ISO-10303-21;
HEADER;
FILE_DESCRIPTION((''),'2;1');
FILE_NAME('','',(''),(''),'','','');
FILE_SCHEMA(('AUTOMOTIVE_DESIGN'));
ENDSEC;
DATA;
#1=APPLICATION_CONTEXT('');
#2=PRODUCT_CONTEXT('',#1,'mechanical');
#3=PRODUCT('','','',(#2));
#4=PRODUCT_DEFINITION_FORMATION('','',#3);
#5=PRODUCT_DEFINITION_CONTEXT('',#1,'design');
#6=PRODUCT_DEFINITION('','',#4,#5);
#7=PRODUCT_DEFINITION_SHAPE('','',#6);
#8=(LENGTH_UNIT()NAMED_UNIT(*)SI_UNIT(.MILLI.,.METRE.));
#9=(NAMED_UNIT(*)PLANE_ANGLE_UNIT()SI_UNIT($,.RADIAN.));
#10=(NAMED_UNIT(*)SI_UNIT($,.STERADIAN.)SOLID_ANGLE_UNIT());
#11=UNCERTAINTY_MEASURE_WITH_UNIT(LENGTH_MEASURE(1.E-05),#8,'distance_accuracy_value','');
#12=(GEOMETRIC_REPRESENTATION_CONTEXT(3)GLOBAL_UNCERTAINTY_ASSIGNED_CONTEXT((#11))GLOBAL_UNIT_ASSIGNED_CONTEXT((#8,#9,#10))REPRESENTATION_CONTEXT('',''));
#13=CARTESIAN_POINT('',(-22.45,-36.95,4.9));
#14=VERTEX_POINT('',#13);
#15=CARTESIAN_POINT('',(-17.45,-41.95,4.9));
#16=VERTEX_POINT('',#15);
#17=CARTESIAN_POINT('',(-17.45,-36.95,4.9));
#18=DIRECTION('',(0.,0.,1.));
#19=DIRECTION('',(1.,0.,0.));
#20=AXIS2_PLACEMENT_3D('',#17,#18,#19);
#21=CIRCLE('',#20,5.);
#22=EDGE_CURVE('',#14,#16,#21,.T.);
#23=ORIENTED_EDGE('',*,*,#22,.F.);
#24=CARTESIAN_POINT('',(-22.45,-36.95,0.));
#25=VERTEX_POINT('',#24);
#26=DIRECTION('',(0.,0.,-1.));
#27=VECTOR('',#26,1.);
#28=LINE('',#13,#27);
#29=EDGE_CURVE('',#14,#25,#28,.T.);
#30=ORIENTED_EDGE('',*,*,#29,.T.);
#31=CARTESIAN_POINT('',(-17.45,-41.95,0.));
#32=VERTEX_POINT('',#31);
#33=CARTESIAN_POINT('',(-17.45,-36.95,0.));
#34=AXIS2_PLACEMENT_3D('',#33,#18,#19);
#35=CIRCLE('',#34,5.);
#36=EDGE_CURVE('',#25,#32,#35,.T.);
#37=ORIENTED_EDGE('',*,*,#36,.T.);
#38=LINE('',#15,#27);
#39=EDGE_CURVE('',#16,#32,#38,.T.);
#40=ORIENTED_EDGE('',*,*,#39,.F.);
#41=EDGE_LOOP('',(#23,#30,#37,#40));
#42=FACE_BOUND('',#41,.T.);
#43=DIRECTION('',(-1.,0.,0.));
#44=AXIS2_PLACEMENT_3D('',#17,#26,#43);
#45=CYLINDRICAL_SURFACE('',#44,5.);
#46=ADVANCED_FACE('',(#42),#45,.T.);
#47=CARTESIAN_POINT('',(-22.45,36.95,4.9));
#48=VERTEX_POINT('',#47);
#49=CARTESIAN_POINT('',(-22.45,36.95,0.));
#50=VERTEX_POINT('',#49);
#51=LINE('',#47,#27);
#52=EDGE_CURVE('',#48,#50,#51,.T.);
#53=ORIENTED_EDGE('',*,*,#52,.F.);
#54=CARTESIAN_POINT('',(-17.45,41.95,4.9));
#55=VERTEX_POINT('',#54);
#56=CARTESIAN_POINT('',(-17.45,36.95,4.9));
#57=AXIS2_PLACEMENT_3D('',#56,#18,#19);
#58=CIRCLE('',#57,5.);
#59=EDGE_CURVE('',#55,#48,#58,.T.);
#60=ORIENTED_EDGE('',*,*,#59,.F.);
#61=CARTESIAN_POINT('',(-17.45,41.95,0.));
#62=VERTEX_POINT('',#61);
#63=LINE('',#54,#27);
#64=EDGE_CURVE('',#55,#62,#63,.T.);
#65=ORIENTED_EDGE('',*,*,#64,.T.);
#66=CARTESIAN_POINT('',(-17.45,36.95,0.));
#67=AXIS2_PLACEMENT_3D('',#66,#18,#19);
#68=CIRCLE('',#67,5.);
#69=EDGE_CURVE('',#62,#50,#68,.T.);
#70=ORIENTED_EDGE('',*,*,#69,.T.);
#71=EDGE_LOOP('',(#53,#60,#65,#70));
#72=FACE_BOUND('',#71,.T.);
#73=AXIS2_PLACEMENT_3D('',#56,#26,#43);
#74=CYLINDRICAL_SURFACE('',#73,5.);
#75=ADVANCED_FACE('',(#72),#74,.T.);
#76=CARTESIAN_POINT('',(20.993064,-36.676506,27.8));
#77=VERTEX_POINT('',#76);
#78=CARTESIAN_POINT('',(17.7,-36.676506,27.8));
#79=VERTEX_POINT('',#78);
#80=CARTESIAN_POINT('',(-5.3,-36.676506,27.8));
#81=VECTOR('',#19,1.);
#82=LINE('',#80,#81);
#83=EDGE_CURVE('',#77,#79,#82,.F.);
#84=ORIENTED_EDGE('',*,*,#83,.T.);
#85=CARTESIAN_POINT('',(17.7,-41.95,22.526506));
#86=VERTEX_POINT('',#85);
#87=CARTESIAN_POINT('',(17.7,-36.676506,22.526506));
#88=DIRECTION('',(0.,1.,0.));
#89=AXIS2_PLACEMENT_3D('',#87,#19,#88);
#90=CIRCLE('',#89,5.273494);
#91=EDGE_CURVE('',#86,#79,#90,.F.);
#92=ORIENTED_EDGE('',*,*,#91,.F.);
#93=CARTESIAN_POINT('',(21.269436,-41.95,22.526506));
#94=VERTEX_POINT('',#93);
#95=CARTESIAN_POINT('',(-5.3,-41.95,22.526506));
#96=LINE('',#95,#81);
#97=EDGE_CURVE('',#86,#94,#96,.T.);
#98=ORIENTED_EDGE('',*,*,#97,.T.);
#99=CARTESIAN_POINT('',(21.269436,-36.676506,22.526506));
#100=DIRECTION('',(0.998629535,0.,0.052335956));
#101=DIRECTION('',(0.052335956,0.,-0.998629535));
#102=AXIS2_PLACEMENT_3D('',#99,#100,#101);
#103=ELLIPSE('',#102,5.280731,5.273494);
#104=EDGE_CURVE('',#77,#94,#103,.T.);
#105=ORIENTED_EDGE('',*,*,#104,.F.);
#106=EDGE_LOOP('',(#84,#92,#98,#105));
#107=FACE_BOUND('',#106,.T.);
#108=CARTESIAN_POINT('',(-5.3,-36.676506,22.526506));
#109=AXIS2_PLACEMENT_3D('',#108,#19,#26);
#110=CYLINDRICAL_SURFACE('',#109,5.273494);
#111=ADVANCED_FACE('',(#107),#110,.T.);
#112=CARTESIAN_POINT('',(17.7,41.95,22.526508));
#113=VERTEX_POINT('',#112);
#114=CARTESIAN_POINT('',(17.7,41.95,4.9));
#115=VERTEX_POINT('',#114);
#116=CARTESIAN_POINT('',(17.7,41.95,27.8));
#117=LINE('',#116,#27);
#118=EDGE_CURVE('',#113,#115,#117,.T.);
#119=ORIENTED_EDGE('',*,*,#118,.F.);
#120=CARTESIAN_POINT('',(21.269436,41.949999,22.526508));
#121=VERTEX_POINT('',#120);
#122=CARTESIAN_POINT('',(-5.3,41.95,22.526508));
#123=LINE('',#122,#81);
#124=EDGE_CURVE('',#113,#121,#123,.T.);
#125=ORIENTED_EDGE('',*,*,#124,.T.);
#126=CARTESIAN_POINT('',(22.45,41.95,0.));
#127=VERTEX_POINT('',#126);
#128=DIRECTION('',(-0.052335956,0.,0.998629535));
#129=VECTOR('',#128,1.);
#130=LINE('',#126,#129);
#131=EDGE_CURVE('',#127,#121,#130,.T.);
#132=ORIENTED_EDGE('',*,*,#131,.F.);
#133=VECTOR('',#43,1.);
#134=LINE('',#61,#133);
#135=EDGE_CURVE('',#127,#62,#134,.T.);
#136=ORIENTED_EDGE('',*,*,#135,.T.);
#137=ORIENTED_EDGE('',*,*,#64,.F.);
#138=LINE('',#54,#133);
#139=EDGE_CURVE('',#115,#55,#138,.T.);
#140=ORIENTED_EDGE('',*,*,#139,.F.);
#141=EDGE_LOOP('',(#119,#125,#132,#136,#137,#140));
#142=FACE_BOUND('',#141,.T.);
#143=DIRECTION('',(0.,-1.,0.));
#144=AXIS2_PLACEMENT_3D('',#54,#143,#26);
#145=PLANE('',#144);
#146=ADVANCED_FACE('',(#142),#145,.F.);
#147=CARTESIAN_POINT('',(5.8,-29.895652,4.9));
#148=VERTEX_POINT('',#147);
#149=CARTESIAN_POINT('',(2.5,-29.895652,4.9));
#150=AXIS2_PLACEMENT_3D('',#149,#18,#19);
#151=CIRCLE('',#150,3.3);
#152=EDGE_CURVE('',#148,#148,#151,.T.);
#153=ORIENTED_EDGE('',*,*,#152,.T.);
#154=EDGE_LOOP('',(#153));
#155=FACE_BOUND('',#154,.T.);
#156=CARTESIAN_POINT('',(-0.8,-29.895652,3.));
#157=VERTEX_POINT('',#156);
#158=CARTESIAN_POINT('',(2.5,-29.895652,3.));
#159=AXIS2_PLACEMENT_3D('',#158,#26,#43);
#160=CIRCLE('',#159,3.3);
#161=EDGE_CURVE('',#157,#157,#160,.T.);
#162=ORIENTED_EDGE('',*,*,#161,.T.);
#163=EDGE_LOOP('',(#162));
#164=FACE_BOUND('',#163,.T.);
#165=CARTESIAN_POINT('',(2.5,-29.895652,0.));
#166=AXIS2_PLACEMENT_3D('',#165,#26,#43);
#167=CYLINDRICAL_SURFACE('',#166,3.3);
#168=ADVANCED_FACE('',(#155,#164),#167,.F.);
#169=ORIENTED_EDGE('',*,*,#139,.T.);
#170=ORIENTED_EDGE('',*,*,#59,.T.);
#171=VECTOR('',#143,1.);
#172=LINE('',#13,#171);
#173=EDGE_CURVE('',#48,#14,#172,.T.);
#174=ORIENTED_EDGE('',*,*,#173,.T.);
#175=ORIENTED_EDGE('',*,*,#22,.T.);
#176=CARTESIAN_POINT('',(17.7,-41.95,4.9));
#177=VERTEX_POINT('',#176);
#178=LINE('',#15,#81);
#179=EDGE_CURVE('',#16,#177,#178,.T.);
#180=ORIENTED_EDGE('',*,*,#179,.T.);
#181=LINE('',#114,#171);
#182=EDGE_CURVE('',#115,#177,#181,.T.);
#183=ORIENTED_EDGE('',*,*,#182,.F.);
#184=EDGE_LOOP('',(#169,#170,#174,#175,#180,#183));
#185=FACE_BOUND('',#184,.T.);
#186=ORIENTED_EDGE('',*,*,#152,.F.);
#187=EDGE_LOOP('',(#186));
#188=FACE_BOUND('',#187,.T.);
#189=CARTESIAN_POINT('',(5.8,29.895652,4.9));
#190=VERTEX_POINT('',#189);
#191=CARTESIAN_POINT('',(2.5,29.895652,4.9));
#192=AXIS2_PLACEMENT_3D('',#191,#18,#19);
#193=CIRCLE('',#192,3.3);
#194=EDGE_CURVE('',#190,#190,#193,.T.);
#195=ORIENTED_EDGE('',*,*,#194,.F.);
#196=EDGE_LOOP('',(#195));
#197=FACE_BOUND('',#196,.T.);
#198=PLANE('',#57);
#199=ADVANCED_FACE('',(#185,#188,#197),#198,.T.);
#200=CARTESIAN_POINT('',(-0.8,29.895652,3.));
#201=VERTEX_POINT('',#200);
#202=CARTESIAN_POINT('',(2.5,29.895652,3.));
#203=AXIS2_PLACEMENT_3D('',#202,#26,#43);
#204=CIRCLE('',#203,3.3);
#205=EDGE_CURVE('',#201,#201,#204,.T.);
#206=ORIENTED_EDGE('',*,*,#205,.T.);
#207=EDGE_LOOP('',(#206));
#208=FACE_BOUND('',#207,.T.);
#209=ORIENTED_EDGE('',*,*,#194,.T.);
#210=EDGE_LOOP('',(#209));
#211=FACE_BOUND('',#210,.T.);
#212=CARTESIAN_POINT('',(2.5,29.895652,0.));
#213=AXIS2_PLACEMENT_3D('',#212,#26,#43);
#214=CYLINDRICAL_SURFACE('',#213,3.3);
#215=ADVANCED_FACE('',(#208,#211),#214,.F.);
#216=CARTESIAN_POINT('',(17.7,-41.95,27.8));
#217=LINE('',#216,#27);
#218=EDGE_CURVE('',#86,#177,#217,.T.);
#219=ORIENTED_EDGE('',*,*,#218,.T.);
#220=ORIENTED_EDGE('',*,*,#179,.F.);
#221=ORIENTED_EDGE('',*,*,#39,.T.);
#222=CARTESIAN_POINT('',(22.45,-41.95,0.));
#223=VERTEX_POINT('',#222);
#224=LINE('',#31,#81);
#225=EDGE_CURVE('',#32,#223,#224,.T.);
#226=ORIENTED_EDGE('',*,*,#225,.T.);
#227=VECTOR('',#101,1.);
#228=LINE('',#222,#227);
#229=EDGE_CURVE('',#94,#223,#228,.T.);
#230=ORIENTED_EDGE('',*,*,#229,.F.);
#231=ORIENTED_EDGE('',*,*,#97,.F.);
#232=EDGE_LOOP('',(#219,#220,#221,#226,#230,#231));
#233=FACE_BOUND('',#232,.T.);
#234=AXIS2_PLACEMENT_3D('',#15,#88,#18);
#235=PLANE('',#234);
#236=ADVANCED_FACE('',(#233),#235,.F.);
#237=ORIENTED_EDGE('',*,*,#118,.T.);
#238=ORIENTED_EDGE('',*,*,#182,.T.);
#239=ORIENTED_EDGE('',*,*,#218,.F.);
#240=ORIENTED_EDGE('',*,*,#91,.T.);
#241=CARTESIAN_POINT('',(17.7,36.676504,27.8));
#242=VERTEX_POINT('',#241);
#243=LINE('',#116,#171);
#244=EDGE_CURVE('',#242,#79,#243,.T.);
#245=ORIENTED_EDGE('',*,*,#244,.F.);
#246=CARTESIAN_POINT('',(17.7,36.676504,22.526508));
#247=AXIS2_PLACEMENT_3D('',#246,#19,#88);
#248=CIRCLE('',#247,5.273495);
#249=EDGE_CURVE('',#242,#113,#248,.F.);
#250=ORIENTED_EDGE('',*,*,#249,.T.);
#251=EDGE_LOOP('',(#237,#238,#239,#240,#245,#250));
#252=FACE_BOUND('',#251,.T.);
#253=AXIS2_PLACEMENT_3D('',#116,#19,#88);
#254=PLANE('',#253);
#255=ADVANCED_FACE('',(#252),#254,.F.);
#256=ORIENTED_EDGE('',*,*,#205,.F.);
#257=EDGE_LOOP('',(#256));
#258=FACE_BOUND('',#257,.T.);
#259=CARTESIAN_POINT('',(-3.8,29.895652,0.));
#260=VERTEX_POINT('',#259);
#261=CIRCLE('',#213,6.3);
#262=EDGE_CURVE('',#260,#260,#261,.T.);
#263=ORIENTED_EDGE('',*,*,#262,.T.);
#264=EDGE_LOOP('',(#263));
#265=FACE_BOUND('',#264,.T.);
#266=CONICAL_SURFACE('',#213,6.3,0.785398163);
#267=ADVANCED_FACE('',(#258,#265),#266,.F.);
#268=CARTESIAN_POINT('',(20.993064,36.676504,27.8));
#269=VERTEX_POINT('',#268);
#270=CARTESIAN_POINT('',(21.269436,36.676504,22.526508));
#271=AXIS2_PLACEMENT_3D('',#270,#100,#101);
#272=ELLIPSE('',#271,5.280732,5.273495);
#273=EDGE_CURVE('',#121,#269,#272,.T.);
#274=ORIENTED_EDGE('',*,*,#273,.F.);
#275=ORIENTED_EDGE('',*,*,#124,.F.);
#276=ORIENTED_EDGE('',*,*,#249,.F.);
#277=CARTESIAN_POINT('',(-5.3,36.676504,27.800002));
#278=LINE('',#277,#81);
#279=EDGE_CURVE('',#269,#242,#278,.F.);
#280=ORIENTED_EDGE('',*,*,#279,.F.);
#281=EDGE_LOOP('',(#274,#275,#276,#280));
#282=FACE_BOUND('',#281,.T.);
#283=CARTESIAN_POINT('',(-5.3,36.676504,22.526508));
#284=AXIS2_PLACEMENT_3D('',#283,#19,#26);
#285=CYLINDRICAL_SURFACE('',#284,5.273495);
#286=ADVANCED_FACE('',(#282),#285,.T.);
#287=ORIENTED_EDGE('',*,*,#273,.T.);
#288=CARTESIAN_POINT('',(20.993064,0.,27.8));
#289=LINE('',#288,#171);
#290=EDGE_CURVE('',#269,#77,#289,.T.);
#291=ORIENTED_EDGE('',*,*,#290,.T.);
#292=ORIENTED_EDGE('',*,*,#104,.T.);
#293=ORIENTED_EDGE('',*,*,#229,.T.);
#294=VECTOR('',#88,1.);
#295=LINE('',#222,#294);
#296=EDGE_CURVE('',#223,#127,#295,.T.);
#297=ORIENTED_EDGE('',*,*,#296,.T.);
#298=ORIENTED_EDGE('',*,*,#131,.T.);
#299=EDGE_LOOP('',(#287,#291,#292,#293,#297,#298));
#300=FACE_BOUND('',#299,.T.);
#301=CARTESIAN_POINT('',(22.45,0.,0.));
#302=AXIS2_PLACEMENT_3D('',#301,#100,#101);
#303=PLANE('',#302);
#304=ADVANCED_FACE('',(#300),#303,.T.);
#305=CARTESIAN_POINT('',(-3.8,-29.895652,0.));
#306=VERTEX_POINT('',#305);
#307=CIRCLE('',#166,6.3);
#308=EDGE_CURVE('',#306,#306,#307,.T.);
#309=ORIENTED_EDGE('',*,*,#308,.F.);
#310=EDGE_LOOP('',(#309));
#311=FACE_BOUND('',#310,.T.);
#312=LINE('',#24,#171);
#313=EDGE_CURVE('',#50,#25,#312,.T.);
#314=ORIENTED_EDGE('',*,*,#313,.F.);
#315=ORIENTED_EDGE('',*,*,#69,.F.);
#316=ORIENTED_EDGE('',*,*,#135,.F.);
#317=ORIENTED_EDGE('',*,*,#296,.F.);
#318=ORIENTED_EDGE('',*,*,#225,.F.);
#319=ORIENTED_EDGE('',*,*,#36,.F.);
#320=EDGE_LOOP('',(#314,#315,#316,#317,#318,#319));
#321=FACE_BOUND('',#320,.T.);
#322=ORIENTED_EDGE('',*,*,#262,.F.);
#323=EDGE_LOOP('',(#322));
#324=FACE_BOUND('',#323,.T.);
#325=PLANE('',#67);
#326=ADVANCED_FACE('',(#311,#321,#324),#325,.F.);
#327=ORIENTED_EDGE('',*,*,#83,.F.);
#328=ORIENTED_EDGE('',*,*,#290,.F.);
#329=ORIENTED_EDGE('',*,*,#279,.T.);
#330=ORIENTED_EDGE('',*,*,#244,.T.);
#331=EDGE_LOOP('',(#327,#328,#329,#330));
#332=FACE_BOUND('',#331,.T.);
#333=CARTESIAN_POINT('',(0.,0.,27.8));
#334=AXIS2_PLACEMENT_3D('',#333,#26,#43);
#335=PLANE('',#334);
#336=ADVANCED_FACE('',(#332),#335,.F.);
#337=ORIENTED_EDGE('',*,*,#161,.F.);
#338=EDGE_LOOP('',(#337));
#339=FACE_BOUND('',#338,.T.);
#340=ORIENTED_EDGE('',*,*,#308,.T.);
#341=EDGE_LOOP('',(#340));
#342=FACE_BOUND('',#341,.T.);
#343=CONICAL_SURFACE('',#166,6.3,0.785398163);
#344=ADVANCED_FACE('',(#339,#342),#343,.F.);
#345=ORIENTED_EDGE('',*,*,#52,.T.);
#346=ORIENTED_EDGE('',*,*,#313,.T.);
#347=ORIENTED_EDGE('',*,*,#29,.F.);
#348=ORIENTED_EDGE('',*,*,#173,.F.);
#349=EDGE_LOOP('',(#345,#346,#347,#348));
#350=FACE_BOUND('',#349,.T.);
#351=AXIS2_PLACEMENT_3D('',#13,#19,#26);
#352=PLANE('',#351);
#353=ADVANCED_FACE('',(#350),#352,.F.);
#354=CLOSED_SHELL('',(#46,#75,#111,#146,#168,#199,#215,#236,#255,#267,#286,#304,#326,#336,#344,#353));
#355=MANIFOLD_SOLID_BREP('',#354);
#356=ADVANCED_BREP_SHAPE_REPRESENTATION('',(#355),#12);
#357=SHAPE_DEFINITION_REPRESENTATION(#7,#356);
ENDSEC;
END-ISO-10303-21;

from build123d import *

# Parameters (mm, degrees)
BOSS_EXTRUDE1_DEPTH                            = 4.9
SKETCH2_W                                      = 4.75
SKETCH2_H                                      = 83.9
BOSS_EXTRUDE2_DEPTH                            = 22.9
CUT_EXTRUDE1_START                             = -4.75
CUT_EXTRUDE1_DEPTH                             = 4.75
CSK_FOR_M6_FLAT_HEAD_MACHINE_SCREW1_AT_2_COUNT = 2
CSK_FOR_M6_FLAT_HEAD_MACHINE_SCREW1_AT_2_PITCH = 59.791303716
SKETCH8_W                                      = 41.834673512
SKETCH8_H                                      = 83.9
CUT_REVOLVE4_ANGLE                             = 3


# Read off the part's stored shape, not the designer's step: Cut-Extrude1
with BuildPart() as part:
    # Sketch1 → Boss-Extrude1 (new body)
    with BuildSketch(Plane.XY):
        with BuildLine():
            Line((-17.45, -41.95), (22.45, -41.95))
            Line((22.45, -41.95), (22.45, 41.95))
            Line((22.45, 41.95), (-17.45, 41.95))
            ThreePointArc((-17.45, 41.95), (-20.985533906, 40.485533906), (-22.45, 36.95))
            Line((-22.45, 36.95), (-22.45, -36.95))
            ThreePointArc((-22.45, -36.95), (-20.985533906, -40.485533906), (-17.45, -41.95))
        make_face()
    extrude(amount=BOSS_EXTRUDE1_DEPTH)

    # Sketch2 → Boss-Extrude2 (add)
    with BuildSketch(Plane.XY.offset(4.9)):
        with Locations((20.075, 0)):
            Rectangle(SKETCH2_W, SKETCH2_H)
    extrude(amount=BOSS_EXTRUDE2_DEPTH)

    # Cut-Extrude1 outline → Cut-Extrude1 (cut)
    with BuildSketch(Plane(origin=(22.45, 0, 0), x_dir=(0, 0, -1), z_dir=(1, 0, 0)).offset(CUT_EXTRUDE1_START)):
        with BuildLine():
            Line((-27.8, 41.95), (-27.800002133, 36.67650399))
            ThreePointArc((-27.800002133, 36.67650399), (-26.255432728, 40.405429091), (-22.526508249, 41.95))
            Line((-22.526508249, 41.95), (-27.8, 41.95))
        make_face()
        with BuildLine():
            Line((-27.8, -36.676506119), (-27.8, -41.95))
            Line((-27.8, -41.95), (-22.526505934, -41.95))
            ThreePointArc((-22.526505934, -41.95), (-26.255429337, -40.405429468), (-27.8, -36.676506119))
        make_face()
    extrude(amount=CUT_EXTRUDE1_DEPTH, mode=Mode.SUBTRACT)

    # Sketch6 → CSK for M6 Flat Head Machine Screw1 (revolve, cut)
    with BuildSketch(Plane(origin=(2.5, 29.895651858, 0), x_dir=(0, 1, 0), z_dir=(1, 0, 0))):
        Polygon((0, 0), (0, 4.9), (3.3, 4.9), (3.3, 3), (6.3, 0), align=None)
    csk_for_m6_flat_head_machine_screw1 = revolve(axis=Axis((2.5, 29.895651858, -6.35), (0, 0, 1)), mode=Mode.SUBTRACT)

    # CSK for M6 Flat Head Machine Screw1 at 2: CSK for M6 Flat Head Machine Screw1 ×2
    with Locations(*[(0, -i * CSK_FOR_M6_FLAT_HEAD_MACHINE_SCREW1_AT_2_PITCH, 0) for i in range(1, CSK_FOR_M6_FLAT_HEAD_MACHINE_SCREW1_AT_2_COUNT)]):
        add(csk_for_m6_flat_head_machine_screw1, mode=Mode.SUBTRACT)

    # Sketch8 → Cut-Revolve4 (revolve, cut)
    with BuildSketch(Plane(origin=(22.45, 0, 0), x_dir=(0, 0, -1), z_dir=(1, 0, 0))):
        with Locations((-20.917336756, 0)):
            Rectangle(SKETCH8_W, SKETCH8_H)
    revolve(axis=Axis((22.45, -41.95, 0), (0, -1, 0)), revolution_arc=CUT_REVOLVE4_ANGLE, mode=Mode.SUBTRACT)


solid = part.part
